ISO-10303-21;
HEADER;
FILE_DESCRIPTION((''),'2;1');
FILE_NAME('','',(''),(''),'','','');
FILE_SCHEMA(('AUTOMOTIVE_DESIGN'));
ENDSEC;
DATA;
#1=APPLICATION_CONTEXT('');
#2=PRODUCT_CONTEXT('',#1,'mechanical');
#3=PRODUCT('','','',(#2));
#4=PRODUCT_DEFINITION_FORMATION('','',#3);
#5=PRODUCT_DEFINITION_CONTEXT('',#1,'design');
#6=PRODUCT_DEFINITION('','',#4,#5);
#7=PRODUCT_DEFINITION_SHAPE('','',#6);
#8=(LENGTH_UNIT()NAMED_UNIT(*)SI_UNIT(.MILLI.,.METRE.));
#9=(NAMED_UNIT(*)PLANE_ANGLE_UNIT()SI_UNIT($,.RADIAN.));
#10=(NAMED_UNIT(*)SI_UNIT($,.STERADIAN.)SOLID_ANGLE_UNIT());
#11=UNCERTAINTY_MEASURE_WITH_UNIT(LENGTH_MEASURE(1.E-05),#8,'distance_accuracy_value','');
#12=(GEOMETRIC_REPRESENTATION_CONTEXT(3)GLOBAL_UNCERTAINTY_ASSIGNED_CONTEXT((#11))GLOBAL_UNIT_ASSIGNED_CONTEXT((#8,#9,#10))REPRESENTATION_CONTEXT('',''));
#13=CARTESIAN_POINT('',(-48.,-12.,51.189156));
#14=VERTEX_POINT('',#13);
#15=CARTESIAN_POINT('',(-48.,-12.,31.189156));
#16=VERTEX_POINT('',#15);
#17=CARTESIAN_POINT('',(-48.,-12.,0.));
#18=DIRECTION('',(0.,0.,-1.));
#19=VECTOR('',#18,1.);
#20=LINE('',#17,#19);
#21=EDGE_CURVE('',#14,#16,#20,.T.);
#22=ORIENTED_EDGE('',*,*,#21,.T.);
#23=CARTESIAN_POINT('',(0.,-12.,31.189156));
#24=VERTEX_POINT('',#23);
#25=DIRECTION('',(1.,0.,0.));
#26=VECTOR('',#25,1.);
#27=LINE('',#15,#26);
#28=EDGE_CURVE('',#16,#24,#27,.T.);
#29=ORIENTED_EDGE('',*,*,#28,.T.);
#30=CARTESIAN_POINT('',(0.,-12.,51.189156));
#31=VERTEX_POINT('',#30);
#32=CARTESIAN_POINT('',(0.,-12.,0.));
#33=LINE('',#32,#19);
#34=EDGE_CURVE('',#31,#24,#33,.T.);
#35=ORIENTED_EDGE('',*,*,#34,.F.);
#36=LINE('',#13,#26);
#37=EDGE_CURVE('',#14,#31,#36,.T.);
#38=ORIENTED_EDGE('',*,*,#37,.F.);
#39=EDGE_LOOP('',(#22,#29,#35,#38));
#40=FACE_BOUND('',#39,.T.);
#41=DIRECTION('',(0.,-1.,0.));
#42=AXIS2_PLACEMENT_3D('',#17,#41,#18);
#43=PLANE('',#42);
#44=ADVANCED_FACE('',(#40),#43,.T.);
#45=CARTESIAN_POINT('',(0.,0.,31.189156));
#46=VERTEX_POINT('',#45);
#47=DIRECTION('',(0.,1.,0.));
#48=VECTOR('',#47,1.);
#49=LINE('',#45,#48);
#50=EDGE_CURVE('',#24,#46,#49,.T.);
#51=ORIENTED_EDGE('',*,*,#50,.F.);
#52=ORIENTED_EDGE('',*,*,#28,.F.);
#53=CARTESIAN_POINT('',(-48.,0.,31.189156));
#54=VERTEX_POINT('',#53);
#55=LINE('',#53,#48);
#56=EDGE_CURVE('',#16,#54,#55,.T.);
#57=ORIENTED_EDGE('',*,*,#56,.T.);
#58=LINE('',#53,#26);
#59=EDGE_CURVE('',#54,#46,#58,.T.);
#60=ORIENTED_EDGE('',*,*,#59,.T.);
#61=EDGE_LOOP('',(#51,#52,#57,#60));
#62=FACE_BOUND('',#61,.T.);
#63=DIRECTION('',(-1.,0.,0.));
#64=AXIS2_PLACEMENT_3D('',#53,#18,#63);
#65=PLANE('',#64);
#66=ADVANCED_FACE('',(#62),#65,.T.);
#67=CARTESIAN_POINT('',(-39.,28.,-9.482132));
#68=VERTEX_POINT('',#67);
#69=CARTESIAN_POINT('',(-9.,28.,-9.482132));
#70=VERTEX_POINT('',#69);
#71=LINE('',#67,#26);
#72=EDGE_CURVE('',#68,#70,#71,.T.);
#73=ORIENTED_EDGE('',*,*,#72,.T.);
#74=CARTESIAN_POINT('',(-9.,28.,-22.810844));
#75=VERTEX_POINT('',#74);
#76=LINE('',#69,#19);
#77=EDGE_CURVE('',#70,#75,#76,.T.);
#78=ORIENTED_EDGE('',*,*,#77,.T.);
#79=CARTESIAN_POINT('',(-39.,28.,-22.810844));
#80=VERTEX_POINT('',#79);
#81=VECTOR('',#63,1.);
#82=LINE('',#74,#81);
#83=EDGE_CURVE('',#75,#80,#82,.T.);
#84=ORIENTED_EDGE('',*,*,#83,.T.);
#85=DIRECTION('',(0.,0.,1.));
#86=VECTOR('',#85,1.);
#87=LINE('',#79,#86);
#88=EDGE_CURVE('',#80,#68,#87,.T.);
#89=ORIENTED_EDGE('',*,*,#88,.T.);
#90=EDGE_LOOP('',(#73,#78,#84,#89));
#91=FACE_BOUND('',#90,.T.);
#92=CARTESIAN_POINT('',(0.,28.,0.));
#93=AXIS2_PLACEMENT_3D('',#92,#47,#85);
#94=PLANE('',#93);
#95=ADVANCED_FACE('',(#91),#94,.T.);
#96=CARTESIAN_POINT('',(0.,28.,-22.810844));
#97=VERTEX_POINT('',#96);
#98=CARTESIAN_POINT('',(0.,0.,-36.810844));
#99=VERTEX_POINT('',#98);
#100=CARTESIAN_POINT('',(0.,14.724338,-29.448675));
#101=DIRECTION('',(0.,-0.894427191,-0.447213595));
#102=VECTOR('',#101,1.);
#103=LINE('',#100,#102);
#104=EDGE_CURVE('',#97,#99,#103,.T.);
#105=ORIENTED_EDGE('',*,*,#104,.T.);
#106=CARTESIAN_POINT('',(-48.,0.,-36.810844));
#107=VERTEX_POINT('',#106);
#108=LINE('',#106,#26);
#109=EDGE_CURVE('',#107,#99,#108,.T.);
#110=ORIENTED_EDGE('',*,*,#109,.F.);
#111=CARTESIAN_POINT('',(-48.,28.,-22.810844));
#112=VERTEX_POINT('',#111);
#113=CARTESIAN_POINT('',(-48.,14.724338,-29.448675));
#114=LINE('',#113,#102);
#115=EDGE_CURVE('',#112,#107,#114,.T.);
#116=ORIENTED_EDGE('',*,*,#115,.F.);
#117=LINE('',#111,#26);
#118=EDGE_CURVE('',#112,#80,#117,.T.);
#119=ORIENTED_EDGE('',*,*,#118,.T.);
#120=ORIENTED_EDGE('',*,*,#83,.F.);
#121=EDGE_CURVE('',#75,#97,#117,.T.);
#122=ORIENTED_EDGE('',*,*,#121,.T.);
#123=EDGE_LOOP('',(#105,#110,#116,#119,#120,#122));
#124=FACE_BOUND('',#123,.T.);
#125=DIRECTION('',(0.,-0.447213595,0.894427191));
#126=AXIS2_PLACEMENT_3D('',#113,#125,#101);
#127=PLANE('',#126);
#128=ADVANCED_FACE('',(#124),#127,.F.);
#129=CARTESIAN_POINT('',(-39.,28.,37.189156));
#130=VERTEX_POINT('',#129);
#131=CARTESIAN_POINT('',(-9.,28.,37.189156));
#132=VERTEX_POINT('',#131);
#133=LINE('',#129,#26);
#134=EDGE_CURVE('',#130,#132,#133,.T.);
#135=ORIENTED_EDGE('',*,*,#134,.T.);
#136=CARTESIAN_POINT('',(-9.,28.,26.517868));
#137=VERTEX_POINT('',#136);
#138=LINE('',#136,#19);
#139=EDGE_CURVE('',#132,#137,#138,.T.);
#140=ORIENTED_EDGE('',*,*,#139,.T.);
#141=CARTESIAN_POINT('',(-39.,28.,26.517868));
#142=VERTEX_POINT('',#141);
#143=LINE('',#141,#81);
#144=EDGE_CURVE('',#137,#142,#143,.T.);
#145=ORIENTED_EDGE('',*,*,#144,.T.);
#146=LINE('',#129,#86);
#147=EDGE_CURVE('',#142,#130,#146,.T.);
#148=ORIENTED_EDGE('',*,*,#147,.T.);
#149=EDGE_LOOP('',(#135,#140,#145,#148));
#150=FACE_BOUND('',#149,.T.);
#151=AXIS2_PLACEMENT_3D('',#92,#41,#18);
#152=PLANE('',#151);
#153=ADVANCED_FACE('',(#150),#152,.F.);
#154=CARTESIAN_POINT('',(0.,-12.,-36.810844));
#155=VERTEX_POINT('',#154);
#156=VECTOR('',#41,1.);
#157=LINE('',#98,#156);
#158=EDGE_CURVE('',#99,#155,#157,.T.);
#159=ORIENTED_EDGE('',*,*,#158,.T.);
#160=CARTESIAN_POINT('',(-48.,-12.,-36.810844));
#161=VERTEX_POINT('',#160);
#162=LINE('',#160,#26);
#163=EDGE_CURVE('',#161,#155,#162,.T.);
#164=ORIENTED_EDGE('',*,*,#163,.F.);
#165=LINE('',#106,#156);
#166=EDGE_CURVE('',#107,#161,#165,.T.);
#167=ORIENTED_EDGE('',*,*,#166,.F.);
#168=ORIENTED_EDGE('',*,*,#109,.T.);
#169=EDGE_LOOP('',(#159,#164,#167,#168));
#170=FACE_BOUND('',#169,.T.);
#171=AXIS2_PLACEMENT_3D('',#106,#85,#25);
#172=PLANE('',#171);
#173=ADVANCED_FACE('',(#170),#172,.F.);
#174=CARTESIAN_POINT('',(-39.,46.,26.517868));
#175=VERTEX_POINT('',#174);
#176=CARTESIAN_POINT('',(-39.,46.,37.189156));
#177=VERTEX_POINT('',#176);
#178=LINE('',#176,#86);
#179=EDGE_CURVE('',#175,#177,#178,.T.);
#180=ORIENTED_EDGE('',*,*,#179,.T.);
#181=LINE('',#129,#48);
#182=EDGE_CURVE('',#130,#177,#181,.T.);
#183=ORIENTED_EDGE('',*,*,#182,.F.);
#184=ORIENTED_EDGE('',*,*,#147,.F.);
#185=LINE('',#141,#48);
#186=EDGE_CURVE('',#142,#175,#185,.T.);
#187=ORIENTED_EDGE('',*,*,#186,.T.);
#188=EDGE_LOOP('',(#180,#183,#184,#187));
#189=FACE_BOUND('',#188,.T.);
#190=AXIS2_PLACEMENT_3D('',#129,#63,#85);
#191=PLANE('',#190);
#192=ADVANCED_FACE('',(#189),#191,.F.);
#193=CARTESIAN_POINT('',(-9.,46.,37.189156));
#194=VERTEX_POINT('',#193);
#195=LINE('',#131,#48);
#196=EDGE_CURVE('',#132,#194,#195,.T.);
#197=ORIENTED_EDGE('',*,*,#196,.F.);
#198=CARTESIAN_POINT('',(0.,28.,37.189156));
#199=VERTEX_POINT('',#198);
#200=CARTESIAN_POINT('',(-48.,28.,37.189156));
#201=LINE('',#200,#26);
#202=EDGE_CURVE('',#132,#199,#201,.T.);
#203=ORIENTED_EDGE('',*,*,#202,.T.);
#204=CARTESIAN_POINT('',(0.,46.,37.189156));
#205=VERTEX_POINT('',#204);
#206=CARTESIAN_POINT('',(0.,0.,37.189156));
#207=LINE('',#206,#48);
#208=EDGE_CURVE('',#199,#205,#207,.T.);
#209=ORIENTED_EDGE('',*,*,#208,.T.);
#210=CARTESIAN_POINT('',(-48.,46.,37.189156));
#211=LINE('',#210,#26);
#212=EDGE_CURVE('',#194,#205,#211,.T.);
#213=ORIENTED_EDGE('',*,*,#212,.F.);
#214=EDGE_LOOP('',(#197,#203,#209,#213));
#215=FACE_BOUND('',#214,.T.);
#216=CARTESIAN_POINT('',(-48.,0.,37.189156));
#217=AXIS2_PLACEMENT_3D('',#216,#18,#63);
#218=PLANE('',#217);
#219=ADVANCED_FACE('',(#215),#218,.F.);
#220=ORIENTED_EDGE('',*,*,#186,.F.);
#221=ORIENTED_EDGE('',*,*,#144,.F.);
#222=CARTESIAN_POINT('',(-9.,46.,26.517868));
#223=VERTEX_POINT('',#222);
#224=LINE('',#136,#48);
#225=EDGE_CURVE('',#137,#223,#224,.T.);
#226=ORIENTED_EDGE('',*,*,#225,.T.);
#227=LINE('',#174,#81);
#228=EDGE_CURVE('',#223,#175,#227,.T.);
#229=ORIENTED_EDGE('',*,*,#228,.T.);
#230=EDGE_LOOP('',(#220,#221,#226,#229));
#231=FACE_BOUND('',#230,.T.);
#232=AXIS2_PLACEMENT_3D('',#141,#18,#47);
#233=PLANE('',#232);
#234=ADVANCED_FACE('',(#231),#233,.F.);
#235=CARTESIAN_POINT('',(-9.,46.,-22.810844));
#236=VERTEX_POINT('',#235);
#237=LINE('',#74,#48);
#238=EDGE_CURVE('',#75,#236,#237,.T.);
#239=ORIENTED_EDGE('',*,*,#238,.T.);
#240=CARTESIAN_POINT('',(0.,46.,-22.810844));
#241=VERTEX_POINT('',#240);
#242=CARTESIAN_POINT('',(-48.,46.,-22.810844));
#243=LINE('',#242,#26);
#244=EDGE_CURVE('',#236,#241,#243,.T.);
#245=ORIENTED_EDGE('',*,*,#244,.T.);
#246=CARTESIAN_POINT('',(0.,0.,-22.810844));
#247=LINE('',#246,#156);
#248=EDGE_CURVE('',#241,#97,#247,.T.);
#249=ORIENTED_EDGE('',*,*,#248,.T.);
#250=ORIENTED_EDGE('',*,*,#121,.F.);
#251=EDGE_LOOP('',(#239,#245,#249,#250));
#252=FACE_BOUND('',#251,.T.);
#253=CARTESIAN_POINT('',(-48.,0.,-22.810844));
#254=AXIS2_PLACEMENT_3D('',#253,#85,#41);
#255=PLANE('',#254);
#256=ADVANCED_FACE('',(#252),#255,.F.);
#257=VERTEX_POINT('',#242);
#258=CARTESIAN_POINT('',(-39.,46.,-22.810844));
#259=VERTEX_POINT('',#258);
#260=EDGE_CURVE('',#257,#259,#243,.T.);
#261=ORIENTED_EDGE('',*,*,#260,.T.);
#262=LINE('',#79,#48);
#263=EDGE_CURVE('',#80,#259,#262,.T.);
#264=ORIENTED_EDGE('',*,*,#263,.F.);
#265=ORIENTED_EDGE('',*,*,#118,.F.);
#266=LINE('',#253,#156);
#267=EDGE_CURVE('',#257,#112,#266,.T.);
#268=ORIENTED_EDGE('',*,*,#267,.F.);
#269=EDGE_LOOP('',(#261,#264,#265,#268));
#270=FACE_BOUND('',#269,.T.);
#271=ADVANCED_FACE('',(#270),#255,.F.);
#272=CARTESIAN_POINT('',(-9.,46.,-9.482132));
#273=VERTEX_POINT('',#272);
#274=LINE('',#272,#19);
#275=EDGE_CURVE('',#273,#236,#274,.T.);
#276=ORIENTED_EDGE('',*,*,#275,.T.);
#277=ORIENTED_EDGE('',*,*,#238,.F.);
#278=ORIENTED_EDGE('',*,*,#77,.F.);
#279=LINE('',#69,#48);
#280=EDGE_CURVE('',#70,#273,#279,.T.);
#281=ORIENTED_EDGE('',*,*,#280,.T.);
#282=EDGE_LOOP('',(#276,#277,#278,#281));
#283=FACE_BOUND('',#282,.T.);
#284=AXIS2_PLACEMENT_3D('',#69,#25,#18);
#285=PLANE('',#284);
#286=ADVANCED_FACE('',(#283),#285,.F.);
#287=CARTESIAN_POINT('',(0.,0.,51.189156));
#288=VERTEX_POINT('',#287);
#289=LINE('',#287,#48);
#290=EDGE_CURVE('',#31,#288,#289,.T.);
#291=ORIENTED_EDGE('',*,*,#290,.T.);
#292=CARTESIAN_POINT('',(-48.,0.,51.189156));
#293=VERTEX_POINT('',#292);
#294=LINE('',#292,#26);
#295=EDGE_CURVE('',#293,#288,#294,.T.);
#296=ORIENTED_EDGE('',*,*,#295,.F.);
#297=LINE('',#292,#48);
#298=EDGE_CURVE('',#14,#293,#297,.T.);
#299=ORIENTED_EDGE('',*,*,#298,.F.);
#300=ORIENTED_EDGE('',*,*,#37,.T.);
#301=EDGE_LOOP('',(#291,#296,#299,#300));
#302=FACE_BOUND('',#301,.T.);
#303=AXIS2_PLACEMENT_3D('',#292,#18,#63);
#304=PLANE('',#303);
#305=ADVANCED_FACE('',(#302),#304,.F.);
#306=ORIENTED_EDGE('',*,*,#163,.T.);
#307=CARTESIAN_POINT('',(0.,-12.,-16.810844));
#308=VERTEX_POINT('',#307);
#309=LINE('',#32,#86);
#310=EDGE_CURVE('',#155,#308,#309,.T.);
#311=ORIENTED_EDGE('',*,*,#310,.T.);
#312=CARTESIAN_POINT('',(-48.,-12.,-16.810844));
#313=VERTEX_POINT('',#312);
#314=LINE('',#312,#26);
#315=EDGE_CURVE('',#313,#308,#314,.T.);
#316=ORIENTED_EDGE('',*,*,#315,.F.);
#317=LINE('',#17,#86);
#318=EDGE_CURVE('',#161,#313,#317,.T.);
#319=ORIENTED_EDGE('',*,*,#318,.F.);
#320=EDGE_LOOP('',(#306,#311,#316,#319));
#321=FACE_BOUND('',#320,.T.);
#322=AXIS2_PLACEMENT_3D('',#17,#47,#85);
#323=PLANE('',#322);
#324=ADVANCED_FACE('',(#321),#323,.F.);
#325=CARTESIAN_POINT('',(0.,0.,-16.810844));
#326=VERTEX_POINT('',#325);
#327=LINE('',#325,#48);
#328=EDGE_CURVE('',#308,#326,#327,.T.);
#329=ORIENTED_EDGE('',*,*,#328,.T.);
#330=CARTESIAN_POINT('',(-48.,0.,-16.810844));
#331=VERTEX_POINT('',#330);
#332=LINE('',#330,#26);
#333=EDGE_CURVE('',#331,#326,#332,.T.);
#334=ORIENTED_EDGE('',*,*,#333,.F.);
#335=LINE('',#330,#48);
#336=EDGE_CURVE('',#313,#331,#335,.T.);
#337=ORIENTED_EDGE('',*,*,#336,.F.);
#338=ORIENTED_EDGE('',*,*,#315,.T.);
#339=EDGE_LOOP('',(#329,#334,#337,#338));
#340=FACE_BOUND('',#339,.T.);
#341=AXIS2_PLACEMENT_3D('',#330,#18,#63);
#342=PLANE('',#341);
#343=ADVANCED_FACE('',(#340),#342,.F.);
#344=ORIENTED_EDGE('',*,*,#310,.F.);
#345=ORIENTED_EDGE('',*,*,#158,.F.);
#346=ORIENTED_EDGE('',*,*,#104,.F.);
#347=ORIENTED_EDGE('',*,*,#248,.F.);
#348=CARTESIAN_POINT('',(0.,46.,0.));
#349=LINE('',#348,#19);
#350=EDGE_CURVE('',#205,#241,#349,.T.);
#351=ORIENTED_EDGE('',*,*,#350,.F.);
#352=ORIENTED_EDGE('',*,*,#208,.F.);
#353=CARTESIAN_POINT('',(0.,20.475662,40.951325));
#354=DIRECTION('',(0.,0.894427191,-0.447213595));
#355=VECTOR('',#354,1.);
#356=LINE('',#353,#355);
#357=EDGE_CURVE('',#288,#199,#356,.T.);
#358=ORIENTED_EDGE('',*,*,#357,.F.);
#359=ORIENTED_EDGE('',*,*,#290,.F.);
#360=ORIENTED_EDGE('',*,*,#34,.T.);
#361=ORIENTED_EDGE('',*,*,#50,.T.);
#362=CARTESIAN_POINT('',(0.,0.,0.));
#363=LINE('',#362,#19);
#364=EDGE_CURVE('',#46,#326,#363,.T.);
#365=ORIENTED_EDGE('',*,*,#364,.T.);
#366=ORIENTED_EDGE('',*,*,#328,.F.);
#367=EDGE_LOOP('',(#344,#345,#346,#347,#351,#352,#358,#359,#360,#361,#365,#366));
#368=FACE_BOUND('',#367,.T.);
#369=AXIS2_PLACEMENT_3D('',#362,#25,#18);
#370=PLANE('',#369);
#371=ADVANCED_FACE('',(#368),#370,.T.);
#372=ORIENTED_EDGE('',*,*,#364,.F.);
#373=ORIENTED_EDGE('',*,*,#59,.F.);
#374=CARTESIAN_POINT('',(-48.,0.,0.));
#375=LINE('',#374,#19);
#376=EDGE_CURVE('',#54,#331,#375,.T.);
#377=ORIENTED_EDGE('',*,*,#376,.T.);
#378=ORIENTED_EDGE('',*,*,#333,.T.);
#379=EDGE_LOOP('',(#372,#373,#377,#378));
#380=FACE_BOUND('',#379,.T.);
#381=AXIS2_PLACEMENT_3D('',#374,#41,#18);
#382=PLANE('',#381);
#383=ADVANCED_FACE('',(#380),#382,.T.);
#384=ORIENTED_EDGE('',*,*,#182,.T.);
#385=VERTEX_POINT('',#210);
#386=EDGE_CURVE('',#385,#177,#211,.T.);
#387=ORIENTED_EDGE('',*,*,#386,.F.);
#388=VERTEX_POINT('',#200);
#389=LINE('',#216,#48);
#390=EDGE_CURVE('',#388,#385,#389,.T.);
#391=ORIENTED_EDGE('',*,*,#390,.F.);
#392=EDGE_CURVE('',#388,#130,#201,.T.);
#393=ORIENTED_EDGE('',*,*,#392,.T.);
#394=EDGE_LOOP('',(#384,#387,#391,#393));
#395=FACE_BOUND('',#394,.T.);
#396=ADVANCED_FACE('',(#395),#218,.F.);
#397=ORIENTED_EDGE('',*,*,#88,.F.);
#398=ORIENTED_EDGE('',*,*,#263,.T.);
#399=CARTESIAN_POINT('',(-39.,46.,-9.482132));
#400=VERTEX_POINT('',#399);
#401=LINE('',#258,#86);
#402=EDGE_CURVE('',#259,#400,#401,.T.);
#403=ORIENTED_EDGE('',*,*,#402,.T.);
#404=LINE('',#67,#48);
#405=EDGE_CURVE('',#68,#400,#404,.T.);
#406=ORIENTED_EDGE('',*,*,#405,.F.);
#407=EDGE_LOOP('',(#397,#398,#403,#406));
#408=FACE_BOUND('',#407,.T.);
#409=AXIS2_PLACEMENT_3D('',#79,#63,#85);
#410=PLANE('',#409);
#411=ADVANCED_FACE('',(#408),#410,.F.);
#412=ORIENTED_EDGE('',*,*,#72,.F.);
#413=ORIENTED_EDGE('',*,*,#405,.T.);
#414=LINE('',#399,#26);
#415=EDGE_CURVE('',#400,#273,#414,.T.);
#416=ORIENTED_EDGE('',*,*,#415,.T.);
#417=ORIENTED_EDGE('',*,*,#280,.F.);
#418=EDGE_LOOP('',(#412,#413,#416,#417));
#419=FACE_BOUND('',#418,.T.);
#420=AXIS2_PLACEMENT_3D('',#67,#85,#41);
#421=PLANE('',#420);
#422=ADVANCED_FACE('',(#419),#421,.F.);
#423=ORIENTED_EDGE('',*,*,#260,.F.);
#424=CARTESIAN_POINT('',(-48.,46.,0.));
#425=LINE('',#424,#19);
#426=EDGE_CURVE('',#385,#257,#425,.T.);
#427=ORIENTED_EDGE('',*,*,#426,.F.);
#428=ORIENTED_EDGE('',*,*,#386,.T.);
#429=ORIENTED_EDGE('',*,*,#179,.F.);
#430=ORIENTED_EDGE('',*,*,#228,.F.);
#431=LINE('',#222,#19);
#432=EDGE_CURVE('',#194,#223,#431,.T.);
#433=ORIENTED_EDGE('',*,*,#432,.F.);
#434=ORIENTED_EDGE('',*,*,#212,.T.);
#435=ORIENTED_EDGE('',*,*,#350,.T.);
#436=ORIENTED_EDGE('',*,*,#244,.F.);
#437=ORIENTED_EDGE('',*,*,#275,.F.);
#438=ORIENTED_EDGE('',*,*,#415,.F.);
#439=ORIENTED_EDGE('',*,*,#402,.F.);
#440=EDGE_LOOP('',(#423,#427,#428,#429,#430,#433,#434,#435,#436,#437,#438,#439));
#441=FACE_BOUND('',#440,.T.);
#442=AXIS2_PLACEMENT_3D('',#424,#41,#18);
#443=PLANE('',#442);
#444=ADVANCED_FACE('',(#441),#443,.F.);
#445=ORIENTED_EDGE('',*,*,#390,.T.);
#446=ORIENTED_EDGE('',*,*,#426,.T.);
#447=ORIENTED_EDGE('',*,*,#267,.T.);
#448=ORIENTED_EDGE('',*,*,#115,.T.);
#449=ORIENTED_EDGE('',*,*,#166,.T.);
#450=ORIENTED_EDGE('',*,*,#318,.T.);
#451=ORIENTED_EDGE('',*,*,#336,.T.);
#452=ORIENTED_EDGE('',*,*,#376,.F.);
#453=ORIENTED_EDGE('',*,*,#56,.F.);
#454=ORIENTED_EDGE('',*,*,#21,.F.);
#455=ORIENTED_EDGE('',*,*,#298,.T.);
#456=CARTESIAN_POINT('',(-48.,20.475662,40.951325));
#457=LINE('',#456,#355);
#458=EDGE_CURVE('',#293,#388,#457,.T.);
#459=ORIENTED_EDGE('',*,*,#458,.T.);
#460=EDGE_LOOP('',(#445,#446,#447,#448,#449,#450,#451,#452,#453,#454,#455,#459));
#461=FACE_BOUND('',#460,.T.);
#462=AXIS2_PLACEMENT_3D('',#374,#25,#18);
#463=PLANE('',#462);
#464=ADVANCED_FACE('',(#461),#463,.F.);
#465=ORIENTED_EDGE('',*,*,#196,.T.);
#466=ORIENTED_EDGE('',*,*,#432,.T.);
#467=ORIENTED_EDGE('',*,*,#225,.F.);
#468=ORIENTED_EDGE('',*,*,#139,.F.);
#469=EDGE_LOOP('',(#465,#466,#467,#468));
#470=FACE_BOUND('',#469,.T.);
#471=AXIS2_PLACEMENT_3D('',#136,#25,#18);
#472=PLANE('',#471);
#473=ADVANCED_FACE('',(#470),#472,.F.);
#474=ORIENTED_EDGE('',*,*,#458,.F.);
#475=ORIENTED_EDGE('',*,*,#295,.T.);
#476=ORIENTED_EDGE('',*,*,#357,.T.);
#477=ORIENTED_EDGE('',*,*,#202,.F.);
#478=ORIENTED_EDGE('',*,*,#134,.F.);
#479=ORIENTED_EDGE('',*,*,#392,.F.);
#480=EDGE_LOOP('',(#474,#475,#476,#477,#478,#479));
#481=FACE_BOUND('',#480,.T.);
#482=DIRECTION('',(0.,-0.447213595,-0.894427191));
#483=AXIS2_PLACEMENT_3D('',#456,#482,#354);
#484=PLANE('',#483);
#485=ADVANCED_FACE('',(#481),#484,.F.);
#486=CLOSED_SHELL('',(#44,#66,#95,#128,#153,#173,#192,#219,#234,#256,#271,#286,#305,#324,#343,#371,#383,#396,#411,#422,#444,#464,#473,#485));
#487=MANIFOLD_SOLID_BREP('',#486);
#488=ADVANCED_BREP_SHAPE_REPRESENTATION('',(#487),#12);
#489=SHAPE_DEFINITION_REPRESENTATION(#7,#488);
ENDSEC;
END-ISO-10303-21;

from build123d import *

# Parameters (mm, degrees)
BOSS_EXTRUDE1_START = -48
BOSS_EXTRUDE1_DEPTH = 48
SKETCH3_W           = 30
SKETCH3_H           = 10.671288352
SKETCH3_H_2         = 13.328711648
CUT_EXTRUDE1_DEPTH  = 18


# Read off the part's stored shape, not the designer's step: Boss-Extrude1
with BuildPart() as part:
    # Boss-Extrude1 outline → Boss-Extrude1 (new body)
    with BuildSketch(Plane(origin=(0, 0, 0), x_dir=(0, 0, -1), z_dir=(1, 0, 0)).offset(BOSS_EXTRUDE1_START)):
        Polygon((-31.189156063, -12), (-31.189156063, 0), (16.810843937, 0), (16.810843937, -12), (36.810843937, -12), (36.810843937, 0), (22.810843937, 28), (22.810843937, 46), (-37.189156063, 46), (-37.189156063, 28), (-51.189156063, 0), (-51.189156063, -12), align=None)
    extrude(amount=BOSS_EXTRUDE1_DEPTH)

    # Sketch3 → Cut-Extrude1 (cut)
    with BuildSketch(Plane(origin=(0, 46, 0), x_dir=(1, 0, 0), z_dir=(0, 1, 0))):
        with Locations((-24, -31.853511887)):
            Rectangle(SKETCH3_W, SKETCH3_H)
        with Locations((-24, 16.146488113)):
            Rectangle(SKETCH3_W, SKETCH3_H_2)
    extrude(amount=-CUT_EXTRUDE1_DEPTH, mode=Mode.SUBTRACT)


solid = part.part
